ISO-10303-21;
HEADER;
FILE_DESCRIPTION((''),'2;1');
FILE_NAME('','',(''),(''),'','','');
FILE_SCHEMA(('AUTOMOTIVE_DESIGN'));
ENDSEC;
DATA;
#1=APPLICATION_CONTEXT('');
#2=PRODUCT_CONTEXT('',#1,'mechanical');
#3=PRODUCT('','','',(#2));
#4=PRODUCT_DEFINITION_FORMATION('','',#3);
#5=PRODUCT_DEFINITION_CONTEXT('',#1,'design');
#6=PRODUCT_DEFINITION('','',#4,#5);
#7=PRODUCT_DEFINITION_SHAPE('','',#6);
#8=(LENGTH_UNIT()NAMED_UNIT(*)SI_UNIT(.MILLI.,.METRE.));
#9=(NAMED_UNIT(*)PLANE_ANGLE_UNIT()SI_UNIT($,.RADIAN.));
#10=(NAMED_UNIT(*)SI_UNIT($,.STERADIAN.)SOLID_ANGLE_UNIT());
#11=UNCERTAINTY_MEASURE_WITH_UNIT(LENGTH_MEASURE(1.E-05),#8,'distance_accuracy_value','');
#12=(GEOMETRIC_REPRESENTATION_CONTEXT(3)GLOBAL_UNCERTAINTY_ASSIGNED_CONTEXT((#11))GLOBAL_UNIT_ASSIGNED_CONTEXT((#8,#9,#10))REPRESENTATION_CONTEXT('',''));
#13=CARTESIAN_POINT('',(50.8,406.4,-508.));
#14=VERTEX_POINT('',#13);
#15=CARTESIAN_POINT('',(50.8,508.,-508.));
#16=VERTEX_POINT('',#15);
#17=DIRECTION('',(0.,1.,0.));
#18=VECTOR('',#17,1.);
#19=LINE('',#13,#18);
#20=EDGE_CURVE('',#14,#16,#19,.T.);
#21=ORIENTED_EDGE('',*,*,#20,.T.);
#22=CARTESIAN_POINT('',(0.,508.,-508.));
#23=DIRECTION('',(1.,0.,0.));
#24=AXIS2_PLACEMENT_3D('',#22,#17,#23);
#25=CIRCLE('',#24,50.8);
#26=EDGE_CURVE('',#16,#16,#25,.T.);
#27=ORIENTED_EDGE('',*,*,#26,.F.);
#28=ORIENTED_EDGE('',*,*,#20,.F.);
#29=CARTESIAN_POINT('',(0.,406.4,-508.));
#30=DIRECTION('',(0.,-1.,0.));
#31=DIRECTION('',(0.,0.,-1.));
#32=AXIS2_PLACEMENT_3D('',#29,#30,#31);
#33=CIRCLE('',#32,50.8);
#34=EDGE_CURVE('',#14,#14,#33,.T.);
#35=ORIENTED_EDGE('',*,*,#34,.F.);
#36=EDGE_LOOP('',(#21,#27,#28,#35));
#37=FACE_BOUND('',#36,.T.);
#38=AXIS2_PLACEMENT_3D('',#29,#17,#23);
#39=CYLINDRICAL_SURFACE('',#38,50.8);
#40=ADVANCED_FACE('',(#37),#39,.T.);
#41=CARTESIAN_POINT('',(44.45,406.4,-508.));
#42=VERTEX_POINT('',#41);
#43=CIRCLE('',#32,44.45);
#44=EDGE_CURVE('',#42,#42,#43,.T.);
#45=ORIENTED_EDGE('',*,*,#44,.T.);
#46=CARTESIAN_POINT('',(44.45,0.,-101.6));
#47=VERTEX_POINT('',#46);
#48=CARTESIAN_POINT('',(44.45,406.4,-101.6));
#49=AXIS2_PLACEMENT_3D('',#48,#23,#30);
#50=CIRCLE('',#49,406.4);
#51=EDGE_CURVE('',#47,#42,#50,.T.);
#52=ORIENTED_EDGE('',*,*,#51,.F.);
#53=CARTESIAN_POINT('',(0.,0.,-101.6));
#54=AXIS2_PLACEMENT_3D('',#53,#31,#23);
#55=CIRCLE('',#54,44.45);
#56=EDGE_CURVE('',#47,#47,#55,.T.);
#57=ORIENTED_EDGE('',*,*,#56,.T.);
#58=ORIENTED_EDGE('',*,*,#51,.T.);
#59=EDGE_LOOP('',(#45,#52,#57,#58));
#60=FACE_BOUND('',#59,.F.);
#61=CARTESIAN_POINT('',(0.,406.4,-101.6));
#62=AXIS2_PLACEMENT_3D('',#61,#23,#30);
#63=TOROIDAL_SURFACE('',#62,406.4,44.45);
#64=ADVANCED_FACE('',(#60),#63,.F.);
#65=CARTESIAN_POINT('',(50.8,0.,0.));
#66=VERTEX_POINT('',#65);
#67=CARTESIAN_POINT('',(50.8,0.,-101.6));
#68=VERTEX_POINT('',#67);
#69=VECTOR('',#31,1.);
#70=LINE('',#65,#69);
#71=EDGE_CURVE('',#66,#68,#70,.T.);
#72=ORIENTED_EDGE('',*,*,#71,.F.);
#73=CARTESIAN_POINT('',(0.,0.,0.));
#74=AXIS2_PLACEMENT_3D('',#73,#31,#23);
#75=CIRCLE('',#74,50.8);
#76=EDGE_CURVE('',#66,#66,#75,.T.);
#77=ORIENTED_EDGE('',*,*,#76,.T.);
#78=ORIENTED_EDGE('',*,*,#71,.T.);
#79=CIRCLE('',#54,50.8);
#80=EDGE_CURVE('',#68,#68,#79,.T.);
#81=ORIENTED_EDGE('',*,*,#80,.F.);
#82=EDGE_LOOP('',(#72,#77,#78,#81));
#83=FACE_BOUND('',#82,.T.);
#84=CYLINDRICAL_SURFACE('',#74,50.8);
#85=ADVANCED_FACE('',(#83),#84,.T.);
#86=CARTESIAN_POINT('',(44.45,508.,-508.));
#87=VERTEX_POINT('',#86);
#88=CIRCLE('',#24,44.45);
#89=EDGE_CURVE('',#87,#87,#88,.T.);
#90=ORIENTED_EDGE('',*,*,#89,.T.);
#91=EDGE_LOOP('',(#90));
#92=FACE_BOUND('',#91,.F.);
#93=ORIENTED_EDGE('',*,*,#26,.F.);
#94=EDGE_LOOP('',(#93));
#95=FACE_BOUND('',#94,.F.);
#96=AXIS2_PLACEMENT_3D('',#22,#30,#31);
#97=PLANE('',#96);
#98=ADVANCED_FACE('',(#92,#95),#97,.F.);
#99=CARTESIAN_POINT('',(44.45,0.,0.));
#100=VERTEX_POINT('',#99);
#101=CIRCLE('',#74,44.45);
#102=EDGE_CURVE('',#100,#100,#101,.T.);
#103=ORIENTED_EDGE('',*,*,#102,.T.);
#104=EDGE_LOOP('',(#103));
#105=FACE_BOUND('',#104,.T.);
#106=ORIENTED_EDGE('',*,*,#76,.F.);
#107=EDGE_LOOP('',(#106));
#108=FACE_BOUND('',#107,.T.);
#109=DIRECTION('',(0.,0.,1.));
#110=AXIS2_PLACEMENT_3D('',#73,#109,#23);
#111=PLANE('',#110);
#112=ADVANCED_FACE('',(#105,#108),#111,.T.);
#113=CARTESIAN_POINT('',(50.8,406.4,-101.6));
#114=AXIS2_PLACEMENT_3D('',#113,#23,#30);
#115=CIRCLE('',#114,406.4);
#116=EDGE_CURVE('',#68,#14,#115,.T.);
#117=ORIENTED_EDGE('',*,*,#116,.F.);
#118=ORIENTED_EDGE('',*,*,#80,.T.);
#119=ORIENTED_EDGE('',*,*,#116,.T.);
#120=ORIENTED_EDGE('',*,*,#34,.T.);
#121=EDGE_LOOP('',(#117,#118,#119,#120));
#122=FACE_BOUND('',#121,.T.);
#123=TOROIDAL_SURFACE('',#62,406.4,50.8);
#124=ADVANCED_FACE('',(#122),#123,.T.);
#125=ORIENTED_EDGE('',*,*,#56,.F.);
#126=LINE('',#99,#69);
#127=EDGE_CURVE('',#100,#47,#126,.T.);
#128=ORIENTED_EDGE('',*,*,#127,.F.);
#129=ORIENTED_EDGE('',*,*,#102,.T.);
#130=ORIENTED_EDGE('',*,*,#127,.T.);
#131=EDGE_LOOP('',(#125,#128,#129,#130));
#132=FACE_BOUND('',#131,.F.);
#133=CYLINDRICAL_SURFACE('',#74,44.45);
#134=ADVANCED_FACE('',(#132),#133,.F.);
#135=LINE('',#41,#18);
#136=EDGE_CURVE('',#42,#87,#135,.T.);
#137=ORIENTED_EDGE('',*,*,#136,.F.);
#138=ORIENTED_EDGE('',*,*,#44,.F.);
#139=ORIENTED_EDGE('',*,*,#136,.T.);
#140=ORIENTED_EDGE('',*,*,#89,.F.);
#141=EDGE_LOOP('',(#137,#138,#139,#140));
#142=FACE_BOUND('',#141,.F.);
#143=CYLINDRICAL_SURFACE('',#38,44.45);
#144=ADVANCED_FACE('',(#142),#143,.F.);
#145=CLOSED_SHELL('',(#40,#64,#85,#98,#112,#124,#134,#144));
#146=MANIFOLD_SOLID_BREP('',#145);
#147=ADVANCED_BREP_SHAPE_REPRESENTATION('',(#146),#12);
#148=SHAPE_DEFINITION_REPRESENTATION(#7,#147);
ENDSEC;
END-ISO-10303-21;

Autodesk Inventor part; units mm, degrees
ref_plane "YZ Plane" through (0, 0, 0) normal (1, 0, 0) x (0, 1, 0)
ref_plane "XZ Plane" through (0, 0, 0) normal (0, 1, 0) x (-1, 0, 0)
ref_plane "XY Plane" through (0, 0, 0) normal (0, 0, 1) x (1, 0, 0)
sketch "Sketch1" plane through (0, 0, 0) normal (1, 0, 0) x (0, 1, 0)
  line L0 (0, 0) -> (0, -101.6)
  arc A0 (0, -101.6) -> (406.4, -508) centre (406.4, -101.6) ccw
  line L1 (406.4, -508) -> (508, -508)
  dimension "bendAngle" = 90
  dimension "centerlineRadius" = 406.4
  dimension "tangentLength" = 101.6
sketch "Sketch2" plane through (0, 0, 0) normal (0, 0, 1) x (1, 0, 0)
  circle A0 centre (0, 0) radius 50.8
  circle A1 centre (0, 0) radius 44.45
  dimension "outerDiameter" = 101.6
  dimension "wallThickness" = 6.35
sweep "Sweep1" add profiles "Sketch2" path "Sketch1"
properties part number "Tube Bend"
